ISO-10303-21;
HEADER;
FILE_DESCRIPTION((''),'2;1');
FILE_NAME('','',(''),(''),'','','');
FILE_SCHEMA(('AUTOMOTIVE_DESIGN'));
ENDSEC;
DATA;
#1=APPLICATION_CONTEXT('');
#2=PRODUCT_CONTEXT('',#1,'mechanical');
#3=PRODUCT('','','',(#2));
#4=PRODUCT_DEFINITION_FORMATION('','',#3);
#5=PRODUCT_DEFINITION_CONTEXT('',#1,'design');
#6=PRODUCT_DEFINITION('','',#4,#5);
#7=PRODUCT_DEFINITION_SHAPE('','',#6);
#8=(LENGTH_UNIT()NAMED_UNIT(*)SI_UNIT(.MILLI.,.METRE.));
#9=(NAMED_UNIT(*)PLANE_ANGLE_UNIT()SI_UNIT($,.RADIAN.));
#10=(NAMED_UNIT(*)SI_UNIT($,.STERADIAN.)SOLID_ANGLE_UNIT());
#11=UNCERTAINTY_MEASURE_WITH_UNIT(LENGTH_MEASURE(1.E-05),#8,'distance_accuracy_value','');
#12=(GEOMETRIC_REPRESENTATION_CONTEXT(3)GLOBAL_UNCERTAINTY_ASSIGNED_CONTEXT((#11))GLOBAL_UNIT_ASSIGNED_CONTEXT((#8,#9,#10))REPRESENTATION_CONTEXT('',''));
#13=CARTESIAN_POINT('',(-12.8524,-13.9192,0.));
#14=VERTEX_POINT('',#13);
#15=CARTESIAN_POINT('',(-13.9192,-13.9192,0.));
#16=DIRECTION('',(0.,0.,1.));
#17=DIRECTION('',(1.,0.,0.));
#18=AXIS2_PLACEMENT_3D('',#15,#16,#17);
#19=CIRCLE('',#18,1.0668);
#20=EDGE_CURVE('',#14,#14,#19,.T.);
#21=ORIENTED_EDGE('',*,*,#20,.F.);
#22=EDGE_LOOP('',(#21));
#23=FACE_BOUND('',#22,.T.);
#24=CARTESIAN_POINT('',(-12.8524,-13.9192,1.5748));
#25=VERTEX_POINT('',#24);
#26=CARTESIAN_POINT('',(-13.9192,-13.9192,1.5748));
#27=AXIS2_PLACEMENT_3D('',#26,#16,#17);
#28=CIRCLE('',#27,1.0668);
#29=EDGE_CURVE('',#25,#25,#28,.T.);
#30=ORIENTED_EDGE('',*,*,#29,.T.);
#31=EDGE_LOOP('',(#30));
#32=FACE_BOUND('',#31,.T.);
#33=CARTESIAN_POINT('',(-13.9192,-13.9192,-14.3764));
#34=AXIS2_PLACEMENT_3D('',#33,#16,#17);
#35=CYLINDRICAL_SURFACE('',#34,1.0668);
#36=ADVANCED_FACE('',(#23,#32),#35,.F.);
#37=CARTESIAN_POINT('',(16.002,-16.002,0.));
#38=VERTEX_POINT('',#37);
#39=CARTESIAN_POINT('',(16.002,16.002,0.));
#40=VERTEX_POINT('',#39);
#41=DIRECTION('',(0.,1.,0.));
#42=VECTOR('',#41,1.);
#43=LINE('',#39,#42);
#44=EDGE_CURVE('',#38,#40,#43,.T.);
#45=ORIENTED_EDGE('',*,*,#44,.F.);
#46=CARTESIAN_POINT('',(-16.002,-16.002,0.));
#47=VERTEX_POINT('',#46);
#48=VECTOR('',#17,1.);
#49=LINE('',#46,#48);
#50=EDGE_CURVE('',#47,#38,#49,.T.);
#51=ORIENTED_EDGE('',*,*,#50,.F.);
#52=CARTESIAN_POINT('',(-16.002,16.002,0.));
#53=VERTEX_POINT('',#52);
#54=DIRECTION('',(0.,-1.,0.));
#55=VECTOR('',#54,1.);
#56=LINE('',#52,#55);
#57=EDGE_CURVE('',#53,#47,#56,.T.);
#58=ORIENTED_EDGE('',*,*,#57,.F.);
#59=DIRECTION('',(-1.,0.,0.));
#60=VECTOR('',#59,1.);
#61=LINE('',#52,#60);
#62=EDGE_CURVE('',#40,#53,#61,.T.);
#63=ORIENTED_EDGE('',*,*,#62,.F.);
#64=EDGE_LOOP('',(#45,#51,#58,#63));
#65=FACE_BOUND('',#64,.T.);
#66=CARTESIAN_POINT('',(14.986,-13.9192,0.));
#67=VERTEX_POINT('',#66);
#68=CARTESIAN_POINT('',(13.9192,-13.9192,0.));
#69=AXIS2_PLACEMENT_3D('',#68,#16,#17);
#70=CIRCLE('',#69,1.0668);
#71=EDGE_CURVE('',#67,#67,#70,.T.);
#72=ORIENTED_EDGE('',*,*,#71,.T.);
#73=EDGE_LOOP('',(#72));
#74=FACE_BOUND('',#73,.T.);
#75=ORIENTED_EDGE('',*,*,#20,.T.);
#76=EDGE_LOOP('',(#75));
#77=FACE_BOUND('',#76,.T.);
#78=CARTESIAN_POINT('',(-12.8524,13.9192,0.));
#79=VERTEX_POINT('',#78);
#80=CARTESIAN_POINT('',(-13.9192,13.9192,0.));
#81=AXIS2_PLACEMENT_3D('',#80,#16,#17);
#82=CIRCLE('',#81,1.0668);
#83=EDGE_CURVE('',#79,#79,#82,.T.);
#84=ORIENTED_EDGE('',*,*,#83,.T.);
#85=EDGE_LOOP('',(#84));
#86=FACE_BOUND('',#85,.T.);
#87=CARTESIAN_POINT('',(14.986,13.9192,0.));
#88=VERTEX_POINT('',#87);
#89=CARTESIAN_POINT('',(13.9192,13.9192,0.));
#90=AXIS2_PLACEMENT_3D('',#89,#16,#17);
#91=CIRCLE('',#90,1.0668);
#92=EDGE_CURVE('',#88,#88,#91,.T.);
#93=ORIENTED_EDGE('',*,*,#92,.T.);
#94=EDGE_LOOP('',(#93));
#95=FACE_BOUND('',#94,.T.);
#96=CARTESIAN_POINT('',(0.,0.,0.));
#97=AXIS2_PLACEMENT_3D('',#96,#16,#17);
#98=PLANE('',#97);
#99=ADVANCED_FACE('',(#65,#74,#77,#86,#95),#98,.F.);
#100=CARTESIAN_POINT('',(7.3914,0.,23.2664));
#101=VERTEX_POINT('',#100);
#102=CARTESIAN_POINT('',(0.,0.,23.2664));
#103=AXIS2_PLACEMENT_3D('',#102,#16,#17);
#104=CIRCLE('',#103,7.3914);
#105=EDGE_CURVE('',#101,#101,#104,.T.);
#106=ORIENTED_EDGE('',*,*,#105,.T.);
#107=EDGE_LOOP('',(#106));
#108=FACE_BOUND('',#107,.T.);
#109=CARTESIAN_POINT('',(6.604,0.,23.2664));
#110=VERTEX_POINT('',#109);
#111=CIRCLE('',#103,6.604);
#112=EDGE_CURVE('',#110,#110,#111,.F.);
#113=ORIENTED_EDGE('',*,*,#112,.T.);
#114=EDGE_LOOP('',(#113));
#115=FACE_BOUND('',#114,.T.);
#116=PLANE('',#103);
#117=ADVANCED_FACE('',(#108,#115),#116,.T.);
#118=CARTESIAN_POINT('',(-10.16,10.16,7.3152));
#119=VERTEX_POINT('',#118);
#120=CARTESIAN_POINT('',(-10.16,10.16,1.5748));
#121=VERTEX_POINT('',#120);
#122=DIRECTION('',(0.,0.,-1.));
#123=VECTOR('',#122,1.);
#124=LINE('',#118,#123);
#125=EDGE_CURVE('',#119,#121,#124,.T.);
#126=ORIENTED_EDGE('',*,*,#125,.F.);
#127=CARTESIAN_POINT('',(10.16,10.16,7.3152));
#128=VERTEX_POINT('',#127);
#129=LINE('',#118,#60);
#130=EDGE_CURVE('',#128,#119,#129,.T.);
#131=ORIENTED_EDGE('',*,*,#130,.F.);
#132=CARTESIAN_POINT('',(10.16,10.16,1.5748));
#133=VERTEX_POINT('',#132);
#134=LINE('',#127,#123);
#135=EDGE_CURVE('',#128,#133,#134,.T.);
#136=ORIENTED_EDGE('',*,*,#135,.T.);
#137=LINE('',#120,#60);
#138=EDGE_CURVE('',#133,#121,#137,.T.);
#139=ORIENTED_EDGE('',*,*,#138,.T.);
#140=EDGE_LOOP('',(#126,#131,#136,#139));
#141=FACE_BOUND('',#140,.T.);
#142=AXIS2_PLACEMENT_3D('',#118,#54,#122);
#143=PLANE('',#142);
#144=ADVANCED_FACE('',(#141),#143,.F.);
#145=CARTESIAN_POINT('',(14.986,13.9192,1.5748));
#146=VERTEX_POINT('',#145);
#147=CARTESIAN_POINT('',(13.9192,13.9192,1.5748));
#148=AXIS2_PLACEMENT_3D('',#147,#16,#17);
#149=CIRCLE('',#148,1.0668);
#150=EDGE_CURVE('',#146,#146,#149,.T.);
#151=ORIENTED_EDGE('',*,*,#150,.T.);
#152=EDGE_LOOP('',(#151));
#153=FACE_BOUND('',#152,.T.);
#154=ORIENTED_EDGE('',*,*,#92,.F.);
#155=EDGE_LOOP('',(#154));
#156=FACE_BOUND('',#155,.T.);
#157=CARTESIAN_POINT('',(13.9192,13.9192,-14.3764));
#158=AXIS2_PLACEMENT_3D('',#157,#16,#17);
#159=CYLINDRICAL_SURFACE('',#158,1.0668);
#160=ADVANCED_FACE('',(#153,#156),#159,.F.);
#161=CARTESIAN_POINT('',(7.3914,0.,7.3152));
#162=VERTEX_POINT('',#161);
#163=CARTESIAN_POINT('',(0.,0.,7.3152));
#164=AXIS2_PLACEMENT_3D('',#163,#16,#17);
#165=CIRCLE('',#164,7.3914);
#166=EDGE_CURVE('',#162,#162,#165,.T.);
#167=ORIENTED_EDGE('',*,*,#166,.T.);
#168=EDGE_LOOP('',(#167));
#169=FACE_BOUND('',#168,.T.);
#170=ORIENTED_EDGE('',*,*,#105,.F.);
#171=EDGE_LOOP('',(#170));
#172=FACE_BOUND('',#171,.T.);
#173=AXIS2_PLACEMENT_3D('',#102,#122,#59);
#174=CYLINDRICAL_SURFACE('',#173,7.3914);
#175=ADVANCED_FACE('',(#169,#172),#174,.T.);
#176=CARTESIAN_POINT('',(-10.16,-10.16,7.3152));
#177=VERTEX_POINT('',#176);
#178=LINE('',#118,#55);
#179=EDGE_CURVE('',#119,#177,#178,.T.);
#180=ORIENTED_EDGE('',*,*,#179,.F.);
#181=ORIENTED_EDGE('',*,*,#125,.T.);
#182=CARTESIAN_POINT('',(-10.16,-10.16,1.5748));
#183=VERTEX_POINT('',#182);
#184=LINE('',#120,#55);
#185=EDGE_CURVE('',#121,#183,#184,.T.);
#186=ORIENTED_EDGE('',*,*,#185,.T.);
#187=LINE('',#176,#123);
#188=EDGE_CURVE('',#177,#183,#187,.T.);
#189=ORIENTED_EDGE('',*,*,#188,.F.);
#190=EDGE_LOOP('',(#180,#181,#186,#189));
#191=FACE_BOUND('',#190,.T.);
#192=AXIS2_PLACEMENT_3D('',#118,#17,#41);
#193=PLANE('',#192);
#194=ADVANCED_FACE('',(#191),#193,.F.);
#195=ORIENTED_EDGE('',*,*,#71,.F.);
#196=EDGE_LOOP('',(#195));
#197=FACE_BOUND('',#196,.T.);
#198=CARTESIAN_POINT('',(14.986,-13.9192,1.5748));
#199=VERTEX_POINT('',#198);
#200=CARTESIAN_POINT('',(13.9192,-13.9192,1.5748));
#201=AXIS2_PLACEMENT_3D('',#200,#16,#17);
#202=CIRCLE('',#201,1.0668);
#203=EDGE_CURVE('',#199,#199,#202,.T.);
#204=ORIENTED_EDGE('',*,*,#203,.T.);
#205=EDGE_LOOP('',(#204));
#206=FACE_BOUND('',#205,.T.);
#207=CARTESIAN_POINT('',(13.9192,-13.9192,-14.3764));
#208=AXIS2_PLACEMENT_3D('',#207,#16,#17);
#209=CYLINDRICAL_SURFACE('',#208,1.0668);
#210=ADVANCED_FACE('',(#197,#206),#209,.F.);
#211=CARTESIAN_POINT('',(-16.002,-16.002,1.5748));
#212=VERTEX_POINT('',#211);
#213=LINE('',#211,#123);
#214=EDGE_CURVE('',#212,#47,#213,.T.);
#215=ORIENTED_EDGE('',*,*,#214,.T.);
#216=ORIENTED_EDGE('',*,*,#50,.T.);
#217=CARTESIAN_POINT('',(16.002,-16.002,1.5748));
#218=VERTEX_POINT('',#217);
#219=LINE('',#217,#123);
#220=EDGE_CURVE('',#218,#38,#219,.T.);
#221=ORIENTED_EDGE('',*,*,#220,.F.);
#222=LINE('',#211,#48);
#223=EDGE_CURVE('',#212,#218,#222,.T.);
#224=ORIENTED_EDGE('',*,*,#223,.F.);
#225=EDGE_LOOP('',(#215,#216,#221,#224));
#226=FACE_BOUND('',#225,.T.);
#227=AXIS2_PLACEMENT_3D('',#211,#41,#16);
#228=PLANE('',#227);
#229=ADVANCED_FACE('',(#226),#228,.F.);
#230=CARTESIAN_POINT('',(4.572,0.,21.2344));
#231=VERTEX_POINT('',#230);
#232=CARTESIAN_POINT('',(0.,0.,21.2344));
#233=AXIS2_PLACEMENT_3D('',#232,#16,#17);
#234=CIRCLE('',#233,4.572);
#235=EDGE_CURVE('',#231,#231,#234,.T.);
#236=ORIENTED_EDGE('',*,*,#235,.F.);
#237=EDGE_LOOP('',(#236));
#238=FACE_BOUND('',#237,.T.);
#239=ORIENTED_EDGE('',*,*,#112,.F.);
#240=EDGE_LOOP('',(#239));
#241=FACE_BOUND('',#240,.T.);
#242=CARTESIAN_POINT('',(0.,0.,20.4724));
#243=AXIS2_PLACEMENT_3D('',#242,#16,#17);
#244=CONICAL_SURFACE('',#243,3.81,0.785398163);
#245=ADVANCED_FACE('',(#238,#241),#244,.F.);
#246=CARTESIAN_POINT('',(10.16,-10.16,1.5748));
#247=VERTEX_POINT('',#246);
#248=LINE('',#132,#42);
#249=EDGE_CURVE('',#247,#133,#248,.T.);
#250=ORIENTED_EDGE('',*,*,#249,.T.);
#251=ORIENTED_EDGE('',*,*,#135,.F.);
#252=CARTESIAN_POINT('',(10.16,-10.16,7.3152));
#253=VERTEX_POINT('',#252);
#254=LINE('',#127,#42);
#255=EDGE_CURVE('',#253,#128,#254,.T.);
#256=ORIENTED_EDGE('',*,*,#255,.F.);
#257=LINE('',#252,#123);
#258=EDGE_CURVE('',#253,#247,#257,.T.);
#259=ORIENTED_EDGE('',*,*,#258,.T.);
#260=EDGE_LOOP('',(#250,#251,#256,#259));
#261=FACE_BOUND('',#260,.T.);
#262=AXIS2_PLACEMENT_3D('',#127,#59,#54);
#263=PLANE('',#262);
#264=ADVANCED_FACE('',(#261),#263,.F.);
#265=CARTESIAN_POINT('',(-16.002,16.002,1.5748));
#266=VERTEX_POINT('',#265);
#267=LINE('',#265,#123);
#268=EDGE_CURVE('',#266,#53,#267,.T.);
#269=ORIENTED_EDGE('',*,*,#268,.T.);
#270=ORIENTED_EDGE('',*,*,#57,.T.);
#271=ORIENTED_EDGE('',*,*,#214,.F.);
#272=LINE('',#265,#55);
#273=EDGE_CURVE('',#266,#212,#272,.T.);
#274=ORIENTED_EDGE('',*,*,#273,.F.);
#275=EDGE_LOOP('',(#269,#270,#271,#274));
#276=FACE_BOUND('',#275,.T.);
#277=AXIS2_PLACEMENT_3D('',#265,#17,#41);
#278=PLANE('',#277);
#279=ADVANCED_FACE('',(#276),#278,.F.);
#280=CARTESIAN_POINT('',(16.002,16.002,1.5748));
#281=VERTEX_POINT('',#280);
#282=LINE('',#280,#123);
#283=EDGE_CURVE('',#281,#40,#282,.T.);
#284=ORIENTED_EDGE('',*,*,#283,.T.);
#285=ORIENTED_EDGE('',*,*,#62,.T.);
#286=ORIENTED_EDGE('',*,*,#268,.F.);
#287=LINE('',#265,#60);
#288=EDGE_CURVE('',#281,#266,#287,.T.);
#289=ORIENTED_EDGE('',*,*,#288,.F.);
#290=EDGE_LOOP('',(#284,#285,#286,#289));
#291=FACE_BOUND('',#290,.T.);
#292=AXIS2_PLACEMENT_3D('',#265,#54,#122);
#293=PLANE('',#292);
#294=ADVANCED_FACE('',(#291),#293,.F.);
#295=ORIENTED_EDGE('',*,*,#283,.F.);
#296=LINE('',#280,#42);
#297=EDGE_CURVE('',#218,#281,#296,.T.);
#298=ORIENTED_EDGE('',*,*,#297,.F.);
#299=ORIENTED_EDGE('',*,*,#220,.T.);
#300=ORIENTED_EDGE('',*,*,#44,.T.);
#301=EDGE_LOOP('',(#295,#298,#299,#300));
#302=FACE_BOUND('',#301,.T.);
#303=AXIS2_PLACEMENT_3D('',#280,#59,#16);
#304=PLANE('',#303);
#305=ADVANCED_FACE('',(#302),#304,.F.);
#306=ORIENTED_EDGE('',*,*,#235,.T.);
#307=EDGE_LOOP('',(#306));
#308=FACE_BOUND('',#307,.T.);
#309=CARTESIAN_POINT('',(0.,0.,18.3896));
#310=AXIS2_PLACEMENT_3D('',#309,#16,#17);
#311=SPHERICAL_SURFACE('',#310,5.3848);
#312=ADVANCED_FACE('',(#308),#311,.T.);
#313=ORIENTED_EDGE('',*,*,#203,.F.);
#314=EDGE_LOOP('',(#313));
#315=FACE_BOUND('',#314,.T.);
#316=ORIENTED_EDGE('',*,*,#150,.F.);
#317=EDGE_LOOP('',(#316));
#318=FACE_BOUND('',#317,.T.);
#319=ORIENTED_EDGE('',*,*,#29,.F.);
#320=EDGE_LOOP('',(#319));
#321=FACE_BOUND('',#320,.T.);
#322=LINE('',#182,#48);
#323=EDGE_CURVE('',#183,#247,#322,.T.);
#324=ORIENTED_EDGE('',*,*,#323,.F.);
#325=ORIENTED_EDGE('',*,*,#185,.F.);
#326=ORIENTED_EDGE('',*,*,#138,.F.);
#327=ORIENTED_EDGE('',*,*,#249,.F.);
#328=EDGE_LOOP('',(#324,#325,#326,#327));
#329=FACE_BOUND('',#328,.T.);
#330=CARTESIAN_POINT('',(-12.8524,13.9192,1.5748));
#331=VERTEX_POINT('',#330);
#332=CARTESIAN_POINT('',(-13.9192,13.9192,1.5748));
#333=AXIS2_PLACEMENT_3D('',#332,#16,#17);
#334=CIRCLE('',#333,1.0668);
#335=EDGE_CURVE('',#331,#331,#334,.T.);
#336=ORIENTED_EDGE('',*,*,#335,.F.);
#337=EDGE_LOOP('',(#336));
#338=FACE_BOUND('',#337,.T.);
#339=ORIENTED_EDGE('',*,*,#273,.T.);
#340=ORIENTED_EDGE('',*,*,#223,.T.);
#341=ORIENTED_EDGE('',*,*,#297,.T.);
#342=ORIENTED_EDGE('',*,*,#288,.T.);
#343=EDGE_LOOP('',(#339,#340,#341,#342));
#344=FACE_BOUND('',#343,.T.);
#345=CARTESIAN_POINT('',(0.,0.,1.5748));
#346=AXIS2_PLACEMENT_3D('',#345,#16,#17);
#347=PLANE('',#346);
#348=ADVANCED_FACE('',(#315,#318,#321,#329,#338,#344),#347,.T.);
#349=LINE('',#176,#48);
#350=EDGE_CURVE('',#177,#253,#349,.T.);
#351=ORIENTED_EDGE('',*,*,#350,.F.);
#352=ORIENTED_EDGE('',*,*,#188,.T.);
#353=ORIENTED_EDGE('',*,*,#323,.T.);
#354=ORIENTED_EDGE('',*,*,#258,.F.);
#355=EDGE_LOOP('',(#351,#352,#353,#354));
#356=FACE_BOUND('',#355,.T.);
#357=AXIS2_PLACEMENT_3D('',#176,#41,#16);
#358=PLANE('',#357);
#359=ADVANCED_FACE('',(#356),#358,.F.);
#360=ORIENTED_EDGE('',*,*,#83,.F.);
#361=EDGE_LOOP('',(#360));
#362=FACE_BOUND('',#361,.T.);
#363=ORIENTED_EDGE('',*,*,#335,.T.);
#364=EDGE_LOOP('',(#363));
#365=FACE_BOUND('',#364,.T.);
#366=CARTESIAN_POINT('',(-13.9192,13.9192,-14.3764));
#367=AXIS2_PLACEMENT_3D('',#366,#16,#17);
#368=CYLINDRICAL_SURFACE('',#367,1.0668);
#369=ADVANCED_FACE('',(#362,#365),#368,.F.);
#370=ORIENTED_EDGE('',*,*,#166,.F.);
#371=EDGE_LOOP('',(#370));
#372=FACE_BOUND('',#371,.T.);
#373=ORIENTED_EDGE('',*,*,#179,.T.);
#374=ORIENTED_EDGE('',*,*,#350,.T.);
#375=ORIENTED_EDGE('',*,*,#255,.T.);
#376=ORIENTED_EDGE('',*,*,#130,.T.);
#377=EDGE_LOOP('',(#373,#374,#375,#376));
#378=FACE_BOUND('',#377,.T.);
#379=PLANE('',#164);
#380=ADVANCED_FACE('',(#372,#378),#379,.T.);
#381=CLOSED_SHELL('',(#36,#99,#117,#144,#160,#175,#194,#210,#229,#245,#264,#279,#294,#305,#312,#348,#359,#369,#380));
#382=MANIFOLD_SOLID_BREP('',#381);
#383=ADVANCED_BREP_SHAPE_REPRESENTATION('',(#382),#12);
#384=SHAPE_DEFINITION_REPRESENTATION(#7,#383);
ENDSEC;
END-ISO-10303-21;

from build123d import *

# Parameters (mm, degrees)
SKETCH1_W           = 32.004
SKETCH1_H           = 32.004
BOSS_EXTRUDE1_DEPTH = 1.5748
SKETCH2_W           = 20.32
SKETCH2_H           = 20.32
BOSS_EXTRUDE2_DEPTH = 5.7404
SKETCH3_R           = 7.3914
BOSS_EXTRUDE3_DEPTH = 15.9512
SKETCH4_R           = 1.0668
CUT_EXTRUDE1_DEPTH  = 15.9512
SKETCH5_R           = 3.81
CUT_EXTRUDE2_DEPTH  = 2.032
CHAMFER1_SIZE       = 2.794
DOME2_FACE_RADIUS   = 4.572
DOME2_HEIGHT        = 2.54


with BuildPart() as part:
    # Sketch1 → Boss-Extrude1 (new body)
    with BuildSketch(Plane.XY):
        Rectangle(SKETCH1_W, SKETCH1_H)
    extrude(amount=BOSS_EXTRUDE1_DEPTH)

    # Sketch2 → Boss-Extrude2 (add)
    with BuildSketch(Plane.XY.offset(1.5748)):
        Rectangle(SKETCH2_W, SKETCH2_H)
    extrude(amount=BOSS_EXTRUDE2_DEPTH)

    # Sketch3 → Boss-Extrude3 (add)
    with BuildSketch(Plane.XY.offset(7.3152)):
        Circle(SKETCH3_R)
    extrude(amount=BOSS_EXTRUDE3_DEPTH)

    # Sketch4 → Cut-Extrude1 (cut)
    with BuildSketch(Plane.XY.offset(1.5748)):
        with Locations((-13.9192, 13.9192)):
            Circle(SKETCH4_R)
        with Locations((-13.9192, -13.9192)):
            Circle(SKETCH4_R)
        with Locations((13.9192, 13.9192)):
            Circle(SKETCH4_R)
        with Locations((13.9192, -13.9192)):
            Circle(SKETCH4_R)
    extrude(amount=-CUT_EXTRUDE1_DEPTH, mode=Mode.SUBTRACT)

    # Sketch5 → Cut-Extrude2 (cut)
    with BuildSketch(Plane.XY.offset(23.2664)):
        Circle(SKETCH5_R)
    extrude(amount=-CUT_EXTRUDE2_DEPTH, mode=Mode.SUBTRACT)

    # Chamfer1
    # the kernel refuses this chamfer: 2.794 mm, written as the material it takes off along each edge
    with BuildSketch(Plane(origin=(0, 0, 23.2664), x_dir=(1, 0, 0), z_dir=(0, -1, 0))) as chamfer1_piece_1_section:
        Polygon((3.81 + CHAMFER1_SIZE, 0), (3.81, -CHAMFER1_SIZE), (3.81, 0), align=None)
    chamfer1_piece_1 = revolve(axis=Axis((0, 0, 23.2664), (0, 0, 1)), mode=Mode.PRIVATE)
    chamfer1_piece_1 = split(chamfer1_piece_1, bisect_by=Plane(origin=(-5.592803541, 0, 21.2344), z_dir=(0, 0, 1)), keep=Keep.TOP, mode=Mode.PRIVATE)
    add(chamfer1_piece_1, mode=Mode.SUBTRACT)

    # Dome2: a dome of height H over a round flat face of radius A is a cap of a sphere of radius (A * A + H * H) / (2 * H)
    dome2_r = (DOME2_FACE_RADIUS * DOME2_FACE_RADIUS + DOME2_HEIGHT * DOME2_HEIGHT) / (2 * DOME2_HEIGHT)
    dome2_base = Plane((0, 0, 21.2344), z_dir=(0, 0, 1))
    with Locations(dome2_base.offset(DOME2_HEIGHT - dome2_r)):
        dome2_ball = Sphere(dome2_r, mode=Mode.PRIVATE)
    add(split(dome2_ball, bisect_by=dome2_base, keep=Keep.TOP, mode=Mode.PRIVATE))


solid = part.part
